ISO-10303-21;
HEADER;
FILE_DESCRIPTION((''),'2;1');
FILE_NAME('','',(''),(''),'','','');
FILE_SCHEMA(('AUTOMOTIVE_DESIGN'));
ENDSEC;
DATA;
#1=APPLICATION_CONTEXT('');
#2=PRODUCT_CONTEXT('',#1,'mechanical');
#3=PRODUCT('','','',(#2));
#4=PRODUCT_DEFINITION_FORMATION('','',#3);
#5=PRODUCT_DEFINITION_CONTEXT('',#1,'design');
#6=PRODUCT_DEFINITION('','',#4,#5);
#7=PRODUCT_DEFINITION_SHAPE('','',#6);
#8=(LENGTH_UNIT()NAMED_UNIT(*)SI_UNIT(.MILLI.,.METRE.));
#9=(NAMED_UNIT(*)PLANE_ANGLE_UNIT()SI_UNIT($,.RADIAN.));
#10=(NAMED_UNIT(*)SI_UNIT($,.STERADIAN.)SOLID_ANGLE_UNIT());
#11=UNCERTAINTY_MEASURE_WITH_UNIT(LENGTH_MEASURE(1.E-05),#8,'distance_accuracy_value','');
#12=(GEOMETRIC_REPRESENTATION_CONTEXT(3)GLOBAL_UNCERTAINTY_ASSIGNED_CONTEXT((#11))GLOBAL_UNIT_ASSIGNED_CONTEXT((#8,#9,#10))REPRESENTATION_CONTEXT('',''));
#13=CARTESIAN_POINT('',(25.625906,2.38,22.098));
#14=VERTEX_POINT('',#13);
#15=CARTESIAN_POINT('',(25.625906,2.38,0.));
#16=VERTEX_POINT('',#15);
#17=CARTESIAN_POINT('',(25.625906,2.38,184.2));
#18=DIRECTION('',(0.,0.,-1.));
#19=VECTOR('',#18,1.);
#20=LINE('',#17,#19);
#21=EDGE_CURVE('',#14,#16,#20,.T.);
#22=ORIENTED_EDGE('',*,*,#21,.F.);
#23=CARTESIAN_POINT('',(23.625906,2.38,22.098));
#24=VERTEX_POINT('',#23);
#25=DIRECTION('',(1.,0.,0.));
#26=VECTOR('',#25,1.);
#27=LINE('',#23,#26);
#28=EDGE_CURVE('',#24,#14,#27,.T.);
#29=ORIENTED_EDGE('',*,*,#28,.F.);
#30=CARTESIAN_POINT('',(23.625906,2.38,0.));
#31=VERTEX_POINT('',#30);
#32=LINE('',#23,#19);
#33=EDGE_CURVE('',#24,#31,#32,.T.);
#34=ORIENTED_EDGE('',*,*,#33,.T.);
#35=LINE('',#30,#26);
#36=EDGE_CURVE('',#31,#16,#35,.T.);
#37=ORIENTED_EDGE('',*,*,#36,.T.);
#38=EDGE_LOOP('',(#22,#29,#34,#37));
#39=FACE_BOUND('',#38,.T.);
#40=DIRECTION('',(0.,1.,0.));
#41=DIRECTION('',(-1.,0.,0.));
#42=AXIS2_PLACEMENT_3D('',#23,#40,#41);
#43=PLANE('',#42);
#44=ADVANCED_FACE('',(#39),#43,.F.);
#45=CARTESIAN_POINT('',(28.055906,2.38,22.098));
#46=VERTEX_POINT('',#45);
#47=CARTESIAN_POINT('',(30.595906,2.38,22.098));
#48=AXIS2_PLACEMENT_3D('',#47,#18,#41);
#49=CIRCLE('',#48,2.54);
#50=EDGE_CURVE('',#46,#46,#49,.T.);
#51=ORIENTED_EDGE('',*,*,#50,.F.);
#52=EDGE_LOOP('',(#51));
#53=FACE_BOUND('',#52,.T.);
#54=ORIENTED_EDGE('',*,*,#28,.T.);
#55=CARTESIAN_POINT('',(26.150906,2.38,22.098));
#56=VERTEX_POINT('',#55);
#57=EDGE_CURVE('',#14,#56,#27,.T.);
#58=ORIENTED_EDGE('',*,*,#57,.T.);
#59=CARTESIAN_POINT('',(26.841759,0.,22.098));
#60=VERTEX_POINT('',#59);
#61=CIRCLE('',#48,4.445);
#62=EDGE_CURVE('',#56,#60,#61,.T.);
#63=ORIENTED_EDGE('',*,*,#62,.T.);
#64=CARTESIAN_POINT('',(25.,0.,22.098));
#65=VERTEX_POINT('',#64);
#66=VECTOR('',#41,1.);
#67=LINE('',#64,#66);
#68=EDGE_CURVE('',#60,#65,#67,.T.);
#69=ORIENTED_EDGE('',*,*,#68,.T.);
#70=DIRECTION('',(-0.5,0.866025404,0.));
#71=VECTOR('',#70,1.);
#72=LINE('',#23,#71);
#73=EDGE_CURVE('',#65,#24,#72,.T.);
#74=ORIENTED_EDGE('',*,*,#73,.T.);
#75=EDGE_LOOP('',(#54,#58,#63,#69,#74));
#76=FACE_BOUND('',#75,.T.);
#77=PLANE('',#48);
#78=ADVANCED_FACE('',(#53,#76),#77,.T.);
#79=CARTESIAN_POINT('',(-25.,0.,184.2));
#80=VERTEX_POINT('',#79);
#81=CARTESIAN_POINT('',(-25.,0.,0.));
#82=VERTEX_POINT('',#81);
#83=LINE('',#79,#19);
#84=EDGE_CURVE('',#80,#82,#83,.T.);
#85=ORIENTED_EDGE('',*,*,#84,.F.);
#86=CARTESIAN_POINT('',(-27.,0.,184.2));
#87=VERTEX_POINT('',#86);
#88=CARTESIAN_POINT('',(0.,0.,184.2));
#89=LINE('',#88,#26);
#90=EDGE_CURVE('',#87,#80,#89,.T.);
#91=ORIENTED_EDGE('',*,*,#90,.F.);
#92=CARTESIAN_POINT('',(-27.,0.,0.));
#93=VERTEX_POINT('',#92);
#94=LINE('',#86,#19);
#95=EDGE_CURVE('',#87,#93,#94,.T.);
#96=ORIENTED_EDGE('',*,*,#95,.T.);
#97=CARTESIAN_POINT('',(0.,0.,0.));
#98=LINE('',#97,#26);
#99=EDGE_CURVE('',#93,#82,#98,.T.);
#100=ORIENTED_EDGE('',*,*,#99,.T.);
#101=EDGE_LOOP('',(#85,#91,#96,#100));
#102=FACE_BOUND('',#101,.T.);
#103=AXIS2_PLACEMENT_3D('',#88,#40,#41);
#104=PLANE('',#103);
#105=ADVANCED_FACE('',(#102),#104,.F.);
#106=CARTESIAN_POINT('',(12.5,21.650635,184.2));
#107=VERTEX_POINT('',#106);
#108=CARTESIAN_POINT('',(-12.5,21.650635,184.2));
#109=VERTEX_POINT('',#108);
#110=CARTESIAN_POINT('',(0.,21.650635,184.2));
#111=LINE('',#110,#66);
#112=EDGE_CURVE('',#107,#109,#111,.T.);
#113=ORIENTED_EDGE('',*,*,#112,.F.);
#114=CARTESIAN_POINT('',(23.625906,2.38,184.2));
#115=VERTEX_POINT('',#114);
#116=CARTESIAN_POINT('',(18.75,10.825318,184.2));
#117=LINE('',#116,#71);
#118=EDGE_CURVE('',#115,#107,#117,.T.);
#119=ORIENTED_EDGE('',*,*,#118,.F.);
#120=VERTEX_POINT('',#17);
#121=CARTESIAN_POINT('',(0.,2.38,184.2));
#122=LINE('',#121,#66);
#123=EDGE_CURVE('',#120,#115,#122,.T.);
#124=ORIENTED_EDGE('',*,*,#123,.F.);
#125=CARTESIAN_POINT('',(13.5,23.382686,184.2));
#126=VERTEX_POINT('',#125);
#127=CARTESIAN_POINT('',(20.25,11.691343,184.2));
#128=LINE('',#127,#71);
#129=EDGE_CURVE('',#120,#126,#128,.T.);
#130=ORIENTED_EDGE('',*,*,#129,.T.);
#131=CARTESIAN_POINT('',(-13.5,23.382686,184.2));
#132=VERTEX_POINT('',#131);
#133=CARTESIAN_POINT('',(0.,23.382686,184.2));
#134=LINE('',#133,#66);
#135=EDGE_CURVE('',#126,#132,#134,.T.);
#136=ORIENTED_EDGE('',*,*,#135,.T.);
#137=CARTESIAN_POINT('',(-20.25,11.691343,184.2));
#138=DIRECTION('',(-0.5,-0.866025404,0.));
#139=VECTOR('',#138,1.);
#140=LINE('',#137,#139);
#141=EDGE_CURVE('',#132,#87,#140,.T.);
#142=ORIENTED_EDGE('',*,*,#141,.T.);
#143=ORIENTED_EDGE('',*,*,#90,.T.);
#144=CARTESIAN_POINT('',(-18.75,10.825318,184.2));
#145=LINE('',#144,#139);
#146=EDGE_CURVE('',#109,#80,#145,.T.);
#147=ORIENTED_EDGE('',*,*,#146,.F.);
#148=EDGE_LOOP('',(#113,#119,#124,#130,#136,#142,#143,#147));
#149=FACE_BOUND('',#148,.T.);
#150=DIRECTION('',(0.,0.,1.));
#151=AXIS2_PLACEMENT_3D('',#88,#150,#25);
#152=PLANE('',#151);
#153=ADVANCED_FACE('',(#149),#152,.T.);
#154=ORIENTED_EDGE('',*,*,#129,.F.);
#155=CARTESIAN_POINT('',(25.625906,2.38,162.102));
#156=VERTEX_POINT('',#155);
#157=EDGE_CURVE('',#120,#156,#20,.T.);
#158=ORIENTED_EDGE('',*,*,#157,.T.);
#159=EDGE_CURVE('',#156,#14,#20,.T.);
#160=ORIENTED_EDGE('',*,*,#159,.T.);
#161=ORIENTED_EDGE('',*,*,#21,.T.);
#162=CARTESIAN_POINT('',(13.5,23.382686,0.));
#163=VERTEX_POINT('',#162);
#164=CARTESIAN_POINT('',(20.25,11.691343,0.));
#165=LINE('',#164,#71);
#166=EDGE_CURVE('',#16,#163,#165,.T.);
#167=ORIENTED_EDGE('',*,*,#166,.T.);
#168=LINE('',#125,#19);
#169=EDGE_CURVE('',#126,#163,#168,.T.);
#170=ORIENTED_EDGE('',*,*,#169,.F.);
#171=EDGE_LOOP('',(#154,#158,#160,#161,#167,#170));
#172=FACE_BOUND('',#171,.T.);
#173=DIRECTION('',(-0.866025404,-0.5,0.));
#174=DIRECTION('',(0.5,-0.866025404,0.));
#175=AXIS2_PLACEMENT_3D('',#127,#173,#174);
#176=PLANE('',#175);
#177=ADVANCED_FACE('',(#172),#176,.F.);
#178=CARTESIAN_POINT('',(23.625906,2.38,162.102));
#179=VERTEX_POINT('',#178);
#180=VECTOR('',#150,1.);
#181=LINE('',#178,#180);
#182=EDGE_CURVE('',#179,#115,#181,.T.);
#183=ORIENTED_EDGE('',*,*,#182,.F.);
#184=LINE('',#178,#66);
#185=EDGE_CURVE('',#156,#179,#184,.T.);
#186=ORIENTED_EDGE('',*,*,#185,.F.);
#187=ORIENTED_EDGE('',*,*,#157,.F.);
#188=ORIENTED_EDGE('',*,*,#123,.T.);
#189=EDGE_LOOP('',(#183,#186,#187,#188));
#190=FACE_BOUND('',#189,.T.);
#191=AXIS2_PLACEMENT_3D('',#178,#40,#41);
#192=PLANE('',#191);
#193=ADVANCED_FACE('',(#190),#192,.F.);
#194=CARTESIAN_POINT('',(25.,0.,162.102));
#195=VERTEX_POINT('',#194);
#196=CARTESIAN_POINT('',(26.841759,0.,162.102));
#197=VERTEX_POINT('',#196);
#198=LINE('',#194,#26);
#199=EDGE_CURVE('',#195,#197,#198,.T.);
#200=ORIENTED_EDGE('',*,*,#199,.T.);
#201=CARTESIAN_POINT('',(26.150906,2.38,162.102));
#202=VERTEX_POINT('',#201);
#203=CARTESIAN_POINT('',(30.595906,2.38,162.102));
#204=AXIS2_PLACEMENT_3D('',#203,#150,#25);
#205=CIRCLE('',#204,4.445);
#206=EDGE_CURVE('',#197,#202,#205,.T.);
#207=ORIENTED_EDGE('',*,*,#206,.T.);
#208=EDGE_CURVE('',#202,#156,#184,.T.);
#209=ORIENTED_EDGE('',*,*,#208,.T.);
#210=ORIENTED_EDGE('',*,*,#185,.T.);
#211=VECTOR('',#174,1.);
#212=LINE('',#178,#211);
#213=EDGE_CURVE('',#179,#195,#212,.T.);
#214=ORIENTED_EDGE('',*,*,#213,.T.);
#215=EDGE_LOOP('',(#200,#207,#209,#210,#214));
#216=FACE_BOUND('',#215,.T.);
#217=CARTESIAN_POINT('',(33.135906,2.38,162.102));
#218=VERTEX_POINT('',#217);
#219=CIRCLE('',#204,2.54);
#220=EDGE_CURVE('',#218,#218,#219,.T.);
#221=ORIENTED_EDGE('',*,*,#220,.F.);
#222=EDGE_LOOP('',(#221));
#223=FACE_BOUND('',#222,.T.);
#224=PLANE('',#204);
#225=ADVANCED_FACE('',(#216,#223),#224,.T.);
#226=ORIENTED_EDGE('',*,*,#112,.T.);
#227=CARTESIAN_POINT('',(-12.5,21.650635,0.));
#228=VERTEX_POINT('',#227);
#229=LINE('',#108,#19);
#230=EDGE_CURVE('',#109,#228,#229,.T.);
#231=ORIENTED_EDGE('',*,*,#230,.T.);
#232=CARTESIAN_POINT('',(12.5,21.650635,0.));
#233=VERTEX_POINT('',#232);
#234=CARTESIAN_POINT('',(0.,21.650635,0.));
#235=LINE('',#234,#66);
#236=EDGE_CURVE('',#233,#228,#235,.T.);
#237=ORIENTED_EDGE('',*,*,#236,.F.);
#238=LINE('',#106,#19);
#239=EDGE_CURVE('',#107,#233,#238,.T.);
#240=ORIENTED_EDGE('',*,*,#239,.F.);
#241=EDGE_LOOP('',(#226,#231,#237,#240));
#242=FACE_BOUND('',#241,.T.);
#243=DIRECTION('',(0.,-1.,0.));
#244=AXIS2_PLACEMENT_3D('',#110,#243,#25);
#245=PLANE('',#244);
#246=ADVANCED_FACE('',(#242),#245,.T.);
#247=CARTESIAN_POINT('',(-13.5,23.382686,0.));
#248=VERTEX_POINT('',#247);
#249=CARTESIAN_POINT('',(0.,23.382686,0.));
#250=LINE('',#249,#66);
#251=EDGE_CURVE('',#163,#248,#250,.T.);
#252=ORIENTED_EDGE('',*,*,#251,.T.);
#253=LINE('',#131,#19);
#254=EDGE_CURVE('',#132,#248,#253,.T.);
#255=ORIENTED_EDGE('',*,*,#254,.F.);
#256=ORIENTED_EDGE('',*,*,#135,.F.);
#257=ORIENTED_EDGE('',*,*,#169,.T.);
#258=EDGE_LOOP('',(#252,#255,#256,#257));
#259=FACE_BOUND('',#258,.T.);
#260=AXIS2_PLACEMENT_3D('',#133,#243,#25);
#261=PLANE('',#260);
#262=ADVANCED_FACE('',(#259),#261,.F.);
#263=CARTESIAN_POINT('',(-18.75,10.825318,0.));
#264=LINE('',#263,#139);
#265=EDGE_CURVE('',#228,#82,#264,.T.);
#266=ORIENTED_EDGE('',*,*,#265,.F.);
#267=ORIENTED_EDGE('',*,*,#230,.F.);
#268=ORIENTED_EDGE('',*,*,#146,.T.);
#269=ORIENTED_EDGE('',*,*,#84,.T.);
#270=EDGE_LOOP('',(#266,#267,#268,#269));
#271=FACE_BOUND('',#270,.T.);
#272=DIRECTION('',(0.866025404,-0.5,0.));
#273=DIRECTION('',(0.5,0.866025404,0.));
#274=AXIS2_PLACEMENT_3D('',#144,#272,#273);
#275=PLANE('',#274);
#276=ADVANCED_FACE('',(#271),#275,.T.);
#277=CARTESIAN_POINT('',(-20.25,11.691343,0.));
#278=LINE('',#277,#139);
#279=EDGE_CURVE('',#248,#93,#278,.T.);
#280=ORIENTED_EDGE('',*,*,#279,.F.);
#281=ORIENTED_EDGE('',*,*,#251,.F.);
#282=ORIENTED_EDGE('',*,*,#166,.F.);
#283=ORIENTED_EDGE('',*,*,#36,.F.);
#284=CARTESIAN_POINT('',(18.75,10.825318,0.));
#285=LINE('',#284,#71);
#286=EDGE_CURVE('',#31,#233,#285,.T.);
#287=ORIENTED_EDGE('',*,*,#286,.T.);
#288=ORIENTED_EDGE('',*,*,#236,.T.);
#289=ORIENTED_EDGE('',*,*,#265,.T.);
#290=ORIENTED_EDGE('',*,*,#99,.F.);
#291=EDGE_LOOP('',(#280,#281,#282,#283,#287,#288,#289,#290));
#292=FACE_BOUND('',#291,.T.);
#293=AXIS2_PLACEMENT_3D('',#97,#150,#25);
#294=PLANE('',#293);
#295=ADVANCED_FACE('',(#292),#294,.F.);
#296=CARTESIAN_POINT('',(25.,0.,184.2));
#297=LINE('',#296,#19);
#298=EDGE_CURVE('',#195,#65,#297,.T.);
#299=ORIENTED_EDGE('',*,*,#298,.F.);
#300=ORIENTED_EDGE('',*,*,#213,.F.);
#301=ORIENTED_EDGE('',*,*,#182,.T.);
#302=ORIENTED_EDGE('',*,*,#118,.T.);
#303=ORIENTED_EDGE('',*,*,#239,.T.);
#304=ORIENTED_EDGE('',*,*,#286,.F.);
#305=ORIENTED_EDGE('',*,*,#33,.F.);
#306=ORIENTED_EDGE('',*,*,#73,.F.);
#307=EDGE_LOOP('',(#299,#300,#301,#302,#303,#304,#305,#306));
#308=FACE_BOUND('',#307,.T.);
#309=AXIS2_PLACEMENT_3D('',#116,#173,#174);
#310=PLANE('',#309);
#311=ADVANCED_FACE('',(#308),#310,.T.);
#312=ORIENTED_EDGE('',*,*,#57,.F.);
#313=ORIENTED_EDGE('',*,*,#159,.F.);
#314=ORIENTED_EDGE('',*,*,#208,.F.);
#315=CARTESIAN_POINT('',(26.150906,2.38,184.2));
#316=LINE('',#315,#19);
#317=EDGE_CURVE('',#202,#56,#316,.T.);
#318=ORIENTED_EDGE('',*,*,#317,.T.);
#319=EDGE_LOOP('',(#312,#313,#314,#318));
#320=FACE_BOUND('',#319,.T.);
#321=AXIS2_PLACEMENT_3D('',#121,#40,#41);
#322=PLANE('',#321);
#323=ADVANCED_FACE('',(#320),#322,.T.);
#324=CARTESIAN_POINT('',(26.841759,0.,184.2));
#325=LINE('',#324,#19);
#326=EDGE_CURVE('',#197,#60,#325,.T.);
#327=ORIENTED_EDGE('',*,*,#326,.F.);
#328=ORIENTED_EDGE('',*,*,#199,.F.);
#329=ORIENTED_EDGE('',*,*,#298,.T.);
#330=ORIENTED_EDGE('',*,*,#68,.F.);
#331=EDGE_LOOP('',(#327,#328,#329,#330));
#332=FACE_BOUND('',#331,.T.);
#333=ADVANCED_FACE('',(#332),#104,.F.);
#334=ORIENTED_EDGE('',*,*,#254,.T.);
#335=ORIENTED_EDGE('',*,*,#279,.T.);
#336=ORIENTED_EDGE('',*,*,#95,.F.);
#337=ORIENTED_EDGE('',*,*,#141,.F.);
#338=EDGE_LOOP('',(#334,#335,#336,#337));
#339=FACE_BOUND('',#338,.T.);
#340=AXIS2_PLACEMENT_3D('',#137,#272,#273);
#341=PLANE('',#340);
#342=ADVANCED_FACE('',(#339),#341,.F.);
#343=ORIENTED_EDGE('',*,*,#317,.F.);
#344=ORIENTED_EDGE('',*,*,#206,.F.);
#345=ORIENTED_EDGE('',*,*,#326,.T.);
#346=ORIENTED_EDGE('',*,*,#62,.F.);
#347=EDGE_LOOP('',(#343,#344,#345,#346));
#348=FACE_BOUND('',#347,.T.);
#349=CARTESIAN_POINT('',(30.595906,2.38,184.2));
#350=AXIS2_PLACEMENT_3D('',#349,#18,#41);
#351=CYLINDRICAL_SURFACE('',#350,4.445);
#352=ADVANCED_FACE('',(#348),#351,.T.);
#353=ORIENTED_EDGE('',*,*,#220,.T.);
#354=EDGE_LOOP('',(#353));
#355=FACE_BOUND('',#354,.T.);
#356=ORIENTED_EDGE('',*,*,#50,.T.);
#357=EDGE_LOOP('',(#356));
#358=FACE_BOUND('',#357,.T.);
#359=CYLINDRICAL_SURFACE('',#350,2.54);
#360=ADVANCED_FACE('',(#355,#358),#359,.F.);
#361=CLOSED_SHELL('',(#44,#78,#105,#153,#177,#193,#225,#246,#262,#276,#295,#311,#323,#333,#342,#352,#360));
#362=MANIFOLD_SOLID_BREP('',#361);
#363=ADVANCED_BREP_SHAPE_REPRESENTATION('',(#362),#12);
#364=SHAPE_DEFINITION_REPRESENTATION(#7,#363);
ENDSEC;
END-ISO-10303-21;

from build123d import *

# Parameters (mm, degrees)
SKETCH1_R           = 2.54
BOSS_EXTRUDE1_DEPTH = 184.2
CUT_EXTRUDE4_START  = -22.098
CUT_EXTRUDE4_DEPTH  = 22.098
CUT_EXTRUDE5_DEPTH  = 22.098


with BuildPart() as part:
    # Sketch1 → Boss-Extrude1 (new body)
    with BuildSketch(Plane.XY):
        with BuildLine():
            Line((-13.5, 23.382685902), (-27, 0))
            Line((-27, 0), (-25, 0))
            Line((-25, 0), (-12.5, 21.650635095))
            Line((-12.5, 21.650635095), (12.5, 21.650635095))
            Line((12.5, 21.650635095), (25, 0))
            Line((25, 0), (26.841758653, 0))
            ThreePointArc((26.841758653, 0), (34.864700777, 3.619120342), (26.150906359, 2.38))
            Line((26.150906359, 2.38), (25.625906359, 2.38))
            Line((25.625906359, 2.38), (13.5, 23.382685902))
            Line((13.5, 23.382685902), (-13.5, 23.382685902))
        make_face()
        with Locations((30.595906359, 2.38)):
            Circle(SKETCH1_R, mode=Mode.SUBTRACT)
    extrude(amount=BOSS_EXTRUDE1_DEPTH)

    # Sketch5 → Cut-Extrude4 (cut)
    with BuildSketch(Plane.XY.offset(184.2).offset(CUT_EXTRUDE4_START)):
        with BuildLine():
            Line((23.625906359, 2.38), (26.150906359, 2.38))
            ThreePointArc((26.150906359, 2.38), (34.864700777, 3.619120342), (26.841758653, 0))
            Line((26.841758653, 0), (25, 0))
            Line((25, 0), (23.625906359, 2.38))
        make_face()
    extrude(amount=CUT_EXTRUDE4_DEPTH, mode=Mode.SUBTRACT)

    # Sketch6 → Cut-Extrude5 (cut)
    with BuildSketch(Plane(origin=(0, 0, 0), x_dir=(-1, 0, 0), z_dir=(0, 0, -1))):
        with BuildLine():
            Line((-23.625906359, 2.38), (-26.150906359, 2.38))
            ThreePointArc((-26.150906359, 2.38), (-34.864700777, 3.619120342), (-26.841758653, 0))
            Line((-26.841758653, 0), (-25, 0))
            Line((-25, 0), (-23.625906359, 2.38))
        make_face()
    extrude(amount=-CUT_EXTRUDE5_DEPTH, mode=Mode.SUBTRACT)


solid = part.part
